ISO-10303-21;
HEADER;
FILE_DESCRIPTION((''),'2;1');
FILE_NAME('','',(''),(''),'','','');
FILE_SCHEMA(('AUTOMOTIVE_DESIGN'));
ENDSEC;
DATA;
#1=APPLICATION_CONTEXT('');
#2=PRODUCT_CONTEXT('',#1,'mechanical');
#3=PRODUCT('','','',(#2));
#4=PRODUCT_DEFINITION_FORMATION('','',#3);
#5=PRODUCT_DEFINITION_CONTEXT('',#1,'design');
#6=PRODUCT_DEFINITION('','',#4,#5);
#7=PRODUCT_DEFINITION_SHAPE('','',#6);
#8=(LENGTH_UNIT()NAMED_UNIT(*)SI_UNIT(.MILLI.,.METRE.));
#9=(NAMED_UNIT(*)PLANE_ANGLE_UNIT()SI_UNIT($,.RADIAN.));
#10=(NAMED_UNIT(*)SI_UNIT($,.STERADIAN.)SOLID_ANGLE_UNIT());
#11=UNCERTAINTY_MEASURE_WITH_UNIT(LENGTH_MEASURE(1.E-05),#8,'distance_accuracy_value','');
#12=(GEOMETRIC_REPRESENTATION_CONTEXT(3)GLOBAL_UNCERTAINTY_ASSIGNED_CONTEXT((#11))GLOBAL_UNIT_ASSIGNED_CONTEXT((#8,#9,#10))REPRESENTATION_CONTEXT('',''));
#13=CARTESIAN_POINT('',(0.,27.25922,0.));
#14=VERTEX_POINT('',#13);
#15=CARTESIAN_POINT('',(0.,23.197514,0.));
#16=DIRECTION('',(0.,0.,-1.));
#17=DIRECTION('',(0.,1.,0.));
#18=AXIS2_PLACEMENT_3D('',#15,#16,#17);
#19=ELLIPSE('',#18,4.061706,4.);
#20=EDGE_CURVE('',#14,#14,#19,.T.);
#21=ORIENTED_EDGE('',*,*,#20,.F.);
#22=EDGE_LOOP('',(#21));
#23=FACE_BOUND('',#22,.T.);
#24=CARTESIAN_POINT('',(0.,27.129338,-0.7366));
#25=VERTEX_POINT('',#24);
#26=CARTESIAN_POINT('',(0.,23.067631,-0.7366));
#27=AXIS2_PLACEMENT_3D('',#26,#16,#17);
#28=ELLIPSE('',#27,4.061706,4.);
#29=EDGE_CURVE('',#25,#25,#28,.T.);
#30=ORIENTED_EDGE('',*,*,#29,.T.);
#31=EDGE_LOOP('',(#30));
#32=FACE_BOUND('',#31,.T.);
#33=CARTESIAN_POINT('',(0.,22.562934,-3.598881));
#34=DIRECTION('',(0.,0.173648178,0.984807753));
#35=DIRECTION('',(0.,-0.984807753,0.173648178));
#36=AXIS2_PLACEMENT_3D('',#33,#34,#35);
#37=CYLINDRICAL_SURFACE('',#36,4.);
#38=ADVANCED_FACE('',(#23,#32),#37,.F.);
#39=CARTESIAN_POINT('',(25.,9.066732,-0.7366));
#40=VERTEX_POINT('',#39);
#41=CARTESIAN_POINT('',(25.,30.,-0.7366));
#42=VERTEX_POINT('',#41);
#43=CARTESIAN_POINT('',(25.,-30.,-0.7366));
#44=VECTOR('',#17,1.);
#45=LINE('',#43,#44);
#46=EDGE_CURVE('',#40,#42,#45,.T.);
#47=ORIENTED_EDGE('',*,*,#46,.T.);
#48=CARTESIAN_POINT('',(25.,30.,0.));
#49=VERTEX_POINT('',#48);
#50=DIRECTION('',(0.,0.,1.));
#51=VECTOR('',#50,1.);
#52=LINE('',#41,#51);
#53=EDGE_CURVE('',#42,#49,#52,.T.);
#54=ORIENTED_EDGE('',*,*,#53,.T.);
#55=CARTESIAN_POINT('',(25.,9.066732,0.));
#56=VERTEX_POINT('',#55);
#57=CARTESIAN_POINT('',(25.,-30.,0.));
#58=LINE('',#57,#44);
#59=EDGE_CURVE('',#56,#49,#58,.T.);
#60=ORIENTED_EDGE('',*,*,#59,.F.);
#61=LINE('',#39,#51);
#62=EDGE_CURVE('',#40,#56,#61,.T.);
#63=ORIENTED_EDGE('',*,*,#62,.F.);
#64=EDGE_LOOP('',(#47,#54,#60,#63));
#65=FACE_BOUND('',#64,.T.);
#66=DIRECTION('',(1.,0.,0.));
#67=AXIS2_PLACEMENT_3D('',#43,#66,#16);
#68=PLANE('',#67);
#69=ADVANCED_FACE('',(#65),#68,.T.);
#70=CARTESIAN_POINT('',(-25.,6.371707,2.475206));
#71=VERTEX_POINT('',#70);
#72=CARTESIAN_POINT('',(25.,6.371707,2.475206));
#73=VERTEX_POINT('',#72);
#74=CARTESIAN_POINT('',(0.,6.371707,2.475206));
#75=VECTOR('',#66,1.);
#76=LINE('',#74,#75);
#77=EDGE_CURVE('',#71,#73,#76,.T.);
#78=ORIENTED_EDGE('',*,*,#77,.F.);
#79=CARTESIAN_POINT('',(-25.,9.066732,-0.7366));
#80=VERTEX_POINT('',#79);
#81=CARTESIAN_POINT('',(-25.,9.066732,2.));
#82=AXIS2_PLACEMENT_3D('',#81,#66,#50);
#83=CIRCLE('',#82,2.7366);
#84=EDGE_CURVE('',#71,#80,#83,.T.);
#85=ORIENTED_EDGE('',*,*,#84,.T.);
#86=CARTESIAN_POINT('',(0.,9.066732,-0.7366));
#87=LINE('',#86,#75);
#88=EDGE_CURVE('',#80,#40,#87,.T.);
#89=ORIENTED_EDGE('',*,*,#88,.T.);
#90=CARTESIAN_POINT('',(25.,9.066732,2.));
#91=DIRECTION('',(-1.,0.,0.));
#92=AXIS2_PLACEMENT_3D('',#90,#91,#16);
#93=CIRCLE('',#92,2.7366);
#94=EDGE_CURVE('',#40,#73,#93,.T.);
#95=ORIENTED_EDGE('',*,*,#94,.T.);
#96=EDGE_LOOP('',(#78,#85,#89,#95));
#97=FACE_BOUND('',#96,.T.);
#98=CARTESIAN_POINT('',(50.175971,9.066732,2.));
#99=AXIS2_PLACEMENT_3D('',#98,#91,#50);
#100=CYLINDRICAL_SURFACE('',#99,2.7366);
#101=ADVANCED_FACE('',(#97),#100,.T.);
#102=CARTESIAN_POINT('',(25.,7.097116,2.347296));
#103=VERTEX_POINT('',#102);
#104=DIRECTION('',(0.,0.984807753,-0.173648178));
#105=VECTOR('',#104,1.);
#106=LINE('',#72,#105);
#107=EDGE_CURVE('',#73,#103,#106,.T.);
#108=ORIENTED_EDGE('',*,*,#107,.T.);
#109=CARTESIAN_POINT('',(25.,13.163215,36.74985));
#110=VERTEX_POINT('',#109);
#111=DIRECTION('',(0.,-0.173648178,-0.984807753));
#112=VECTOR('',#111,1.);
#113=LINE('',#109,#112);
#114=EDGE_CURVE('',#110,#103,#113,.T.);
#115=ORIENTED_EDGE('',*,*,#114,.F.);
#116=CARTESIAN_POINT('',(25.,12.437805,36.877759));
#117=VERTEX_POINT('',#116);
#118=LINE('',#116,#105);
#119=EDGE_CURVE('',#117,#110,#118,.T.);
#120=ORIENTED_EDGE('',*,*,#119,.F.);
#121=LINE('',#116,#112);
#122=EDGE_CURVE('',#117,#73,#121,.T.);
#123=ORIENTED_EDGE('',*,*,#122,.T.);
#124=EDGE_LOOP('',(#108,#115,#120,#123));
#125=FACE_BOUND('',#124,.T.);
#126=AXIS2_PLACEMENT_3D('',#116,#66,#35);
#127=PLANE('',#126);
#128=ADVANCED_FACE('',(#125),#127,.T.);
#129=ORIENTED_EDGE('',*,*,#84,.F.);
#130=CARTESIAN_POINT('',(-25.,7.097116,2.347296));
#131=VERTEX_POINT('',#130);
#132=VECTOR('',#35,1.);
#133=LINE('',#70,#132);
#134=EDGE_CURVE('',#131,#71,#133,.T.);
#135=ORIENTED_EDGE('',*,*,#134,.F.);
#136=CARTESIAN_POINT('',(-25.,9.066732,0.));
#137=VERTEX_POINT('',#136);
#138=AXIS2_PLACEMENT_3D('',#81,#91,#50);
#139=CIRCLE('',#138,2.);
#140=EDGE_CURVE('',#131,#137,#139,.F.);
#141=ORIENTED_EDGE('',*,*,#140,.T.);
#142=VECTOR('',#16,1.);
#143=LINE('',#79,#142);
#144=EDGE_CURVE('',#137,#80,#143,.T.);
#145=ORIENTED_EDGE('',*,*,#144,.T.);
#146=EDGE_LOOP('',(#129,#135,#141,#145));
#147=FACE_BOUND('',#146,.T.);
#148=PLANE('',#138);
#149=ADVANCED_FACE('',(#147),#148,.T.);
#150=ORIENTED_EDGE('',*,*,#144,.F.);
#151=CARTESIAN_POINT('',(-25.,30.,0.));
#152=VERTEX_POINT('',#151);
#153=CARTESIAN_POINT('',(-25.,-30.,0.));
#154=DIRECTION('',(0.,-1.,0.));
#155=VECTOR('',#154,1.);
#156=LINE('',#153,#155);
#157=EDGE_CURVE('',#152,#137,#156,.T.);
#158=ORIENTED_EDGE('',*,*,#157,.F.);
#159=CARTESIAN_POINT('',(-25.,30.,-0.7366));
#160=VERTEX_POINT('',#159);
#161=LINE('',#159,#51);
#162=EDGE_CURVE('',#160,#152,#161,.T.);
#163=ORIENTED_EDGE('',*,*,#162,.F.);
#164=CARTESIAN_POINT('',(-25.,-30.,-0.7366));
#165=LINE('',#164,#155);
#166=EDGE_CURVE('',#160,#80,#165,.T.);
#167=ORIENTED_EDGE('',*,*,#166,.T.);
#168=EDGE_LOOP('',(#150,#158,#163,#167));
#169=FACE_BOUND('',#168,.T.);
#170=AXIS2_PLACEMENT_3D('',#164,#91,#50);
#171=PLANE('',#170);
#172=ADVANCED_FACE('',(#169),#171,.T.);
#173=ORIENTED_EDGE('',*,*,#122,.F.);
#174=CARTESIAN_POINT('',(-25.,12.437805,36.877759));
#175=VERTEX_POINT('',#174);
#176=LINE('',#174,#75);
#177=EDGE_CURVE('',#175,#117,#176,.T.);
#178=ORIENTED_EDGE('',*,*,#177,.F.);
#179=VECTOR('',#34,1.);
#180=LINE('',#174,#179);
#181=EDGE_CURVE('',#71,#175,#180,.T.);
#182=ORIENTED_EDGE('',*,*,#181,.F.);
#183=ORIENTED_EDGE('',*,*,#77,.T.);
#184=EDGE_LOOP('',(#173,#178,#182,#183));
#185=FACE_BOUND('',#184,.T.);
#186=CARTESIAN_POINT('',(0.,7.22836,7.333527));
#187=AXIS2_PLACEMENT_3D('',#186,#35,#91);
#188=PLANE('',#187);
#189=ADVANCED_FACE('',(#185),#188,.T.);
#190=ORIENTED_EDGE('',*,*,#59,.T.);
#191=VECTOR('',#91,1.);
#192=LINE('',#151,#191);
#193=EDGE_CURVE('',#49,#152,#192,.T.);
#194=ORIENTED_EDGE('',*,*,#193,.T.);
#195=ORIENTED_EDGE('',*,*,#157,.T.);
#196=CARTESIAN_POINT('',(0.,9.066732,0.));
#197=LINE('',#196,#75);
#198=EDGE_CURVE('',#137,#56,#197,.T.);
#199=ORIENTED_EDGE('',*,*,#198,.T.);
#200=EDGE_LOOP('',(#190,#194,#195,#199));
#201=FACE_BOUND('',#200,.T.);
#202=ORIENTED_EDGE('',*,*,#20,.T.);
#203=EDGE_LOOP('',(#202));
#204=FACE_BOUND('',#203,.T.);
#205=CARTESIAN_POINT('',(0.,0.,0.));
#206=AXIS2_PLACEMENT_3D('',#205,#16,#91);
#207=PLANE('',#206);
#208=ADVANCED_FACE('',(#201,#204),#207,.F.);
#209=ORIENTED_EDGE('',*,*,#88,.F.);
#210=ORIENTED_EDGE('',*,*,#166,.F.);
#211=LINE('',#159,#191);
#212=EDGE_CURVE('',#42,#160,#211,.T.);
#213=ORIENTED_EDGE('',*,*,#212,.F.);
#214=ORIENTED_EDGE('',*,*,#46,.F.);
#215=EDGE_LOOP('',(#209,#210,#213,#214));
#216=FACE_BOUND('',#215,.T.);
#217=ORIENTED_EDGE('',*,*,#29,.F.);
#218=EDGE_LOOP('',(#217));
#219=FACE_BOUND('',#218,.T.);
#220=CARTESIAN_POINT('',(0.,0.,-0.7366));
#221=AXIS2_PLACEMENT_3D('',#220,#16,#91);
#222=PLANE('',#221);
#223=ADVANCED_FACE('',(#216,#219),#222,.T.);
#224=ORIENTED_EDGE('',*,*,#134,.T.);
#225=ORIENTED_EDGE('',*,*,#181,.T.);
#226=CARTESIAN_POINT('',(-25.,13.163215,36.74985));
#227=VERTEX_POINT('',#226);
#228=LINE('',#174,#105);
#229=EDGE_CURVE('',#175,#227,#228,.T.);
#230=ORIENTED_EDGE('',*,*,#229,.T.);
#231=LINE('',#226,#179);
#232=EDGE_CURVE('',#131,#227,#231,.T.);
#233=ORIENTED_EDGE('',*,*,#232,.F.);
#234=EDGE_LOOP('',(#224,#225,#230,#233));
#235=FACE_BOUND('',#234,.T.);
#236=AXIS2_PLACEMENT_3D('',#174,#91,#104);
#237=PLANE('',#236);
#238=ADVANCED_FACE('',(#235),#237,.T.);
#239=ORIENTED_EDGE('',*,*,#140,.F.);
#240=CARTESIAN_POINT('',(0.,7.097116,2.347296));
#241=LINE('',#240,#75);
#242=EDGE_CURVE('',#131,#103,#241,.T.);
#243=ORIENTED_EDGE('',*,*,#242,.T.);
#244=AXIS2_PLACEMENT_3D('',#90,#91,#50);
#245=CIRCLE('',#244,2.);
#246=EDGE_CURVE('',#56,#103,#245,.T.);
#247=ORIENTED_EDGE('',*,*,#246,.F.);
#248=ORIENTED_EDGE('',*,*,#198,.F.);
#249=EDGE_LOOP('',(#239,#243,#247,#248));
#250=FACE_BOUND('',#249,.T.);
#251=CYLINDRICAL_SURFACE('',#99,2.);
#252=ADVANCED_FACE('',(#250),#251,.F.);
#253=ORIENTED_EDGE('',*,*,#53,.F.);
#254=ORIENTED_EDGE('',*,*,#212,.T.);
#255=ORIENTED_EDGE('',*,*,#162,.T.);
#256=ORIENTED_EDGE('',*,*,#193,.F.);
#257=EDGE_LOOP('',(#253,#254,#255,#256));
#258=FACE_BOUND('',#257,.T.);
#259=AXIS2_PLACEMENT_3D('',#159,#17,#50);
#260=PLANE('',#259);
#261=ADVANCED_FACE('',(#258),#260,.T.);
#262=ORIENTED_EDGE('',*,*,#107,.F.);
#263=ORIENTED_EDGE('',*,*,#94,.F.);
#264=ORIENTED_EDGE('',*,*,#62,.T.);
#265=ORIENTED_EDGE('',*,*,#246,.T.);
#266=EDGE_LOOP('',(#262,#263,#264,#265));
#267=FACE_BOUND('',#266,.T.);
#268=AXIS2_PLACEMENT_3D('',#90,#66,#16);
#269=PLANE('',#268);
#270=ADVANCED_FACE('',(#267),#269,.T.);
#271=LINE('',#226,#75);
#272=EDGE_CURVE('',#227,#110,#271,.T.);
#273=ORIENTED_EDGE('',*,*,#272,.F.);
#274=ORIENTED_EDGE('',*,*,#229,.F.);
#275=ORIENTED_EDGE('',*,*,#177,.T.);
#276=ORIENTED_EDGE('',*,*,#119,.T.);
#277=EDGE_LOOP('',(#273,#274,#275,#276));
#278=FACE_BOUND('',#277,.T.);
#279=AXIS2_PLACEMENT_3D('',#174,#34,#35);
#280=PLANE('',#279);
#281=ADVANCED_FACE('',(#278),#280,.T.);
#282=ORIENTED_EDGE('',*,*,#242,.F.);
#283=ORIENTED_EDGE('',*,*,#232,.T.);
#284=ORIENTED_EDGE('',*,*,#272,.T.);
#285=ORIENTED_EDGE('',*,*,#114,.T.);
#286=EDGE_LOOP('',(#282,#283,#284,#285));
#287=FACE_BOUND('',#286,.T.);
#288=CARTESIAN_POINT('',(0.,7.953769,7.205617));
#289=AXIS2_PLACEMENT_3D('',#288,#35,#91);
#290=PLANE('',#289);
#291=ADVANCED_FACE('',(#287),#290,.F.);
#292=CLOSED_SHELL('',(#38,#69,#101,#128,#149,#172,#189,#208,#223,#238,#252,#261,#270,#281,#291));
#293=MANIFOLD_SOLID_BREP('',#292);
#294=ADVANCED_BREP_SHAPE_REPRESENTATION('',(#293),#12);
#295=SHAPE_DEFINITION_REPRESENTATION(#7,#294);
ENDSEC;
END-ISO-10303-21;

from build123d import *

# Parameters (mm, degrees)
SKETCH1_W               = 50
SKETCH1_H               = 60
BASE_FLANGE1_DEPTH      = 0.7366
SKETCHED_START          = -25
SKETCHED_BEND1_DEPTH    = 50
SKETCHED_BEND1_2_DEPTH  = 50
CUT_EXTRUDE1_DEPTH      = 54.090671485
CUT_EXTRUDE1_DEPTH_BACK = 54.090671485
SKETCH8_R               = 4


# Read off the part's stored shape, not the designer's step: Sketched Bend1
# Sheet-metal steps are written as plain solids
with BuildPart() as part:
    # Sketch1 → Base-Flange1 (new body)
    with BuildSketch(Plane.XY):
        Rectangle(SKETCH1_W, SKETCH1_H)
    extrude(amount=-BASE_FLANGE1_DEPTH)

    # Sketched Bend1 outline → Sketched Bend1 (cut)
    with BuildSketch(Plane.YZ.offset(SKETCHED_START)):
        with BuildLine():
            ThreePointArc((9.066731634, -0.7366), (8.062794494, -0.545798456), (7.198850599, 0))
            Line((7.198850599, 0), (-30, 0))
            Line((-30, 0), (-30, -0.7366))
            Line((-30, -0.7366), (9.066731634, -0.7366))
        make_face()
    extrude(amount=SKETCHED_BEND1_DEPTH, mode=Mode.SUBTRACT)

    # Sketched Bend1 2 outline → Sketched Bend1 2 (add)
    with BuildSketch(Plane.YZ.offset(SKETCHED_START)):
        with BuildLine():
            Line((13.163214519, 36.74984988), (12.437805129, 36.877759128))
            Line((12.437805129, 36.877759128), (6.371706737, 2.475205603))
            ThreePointArc((6.371706737, 2.475205603), (6.471218519, 1.132652762), (7.198850599, 0))
            Line((7.198850599, 0), (9.066731634, 0))
            ThreePointArc((9.066731634, 0), (7.534642748, 0.714424781), (7.097116128, 2.347296355))
            Line((7.097116128, 2.347296355), (13.163214519, 36.74984988))
        make_face()
    extrude(amount=SKETCHED_BEND1_2_DEPTH)

    # Sketch8 → Cut-Extrude1 (cut, two sides: drawn at the far end of the back side and taken through both)
    with BuildSketch(Plane(origin=(0, 0.074278928, 0.849012035), x_dir=(1, 0, 0), z_dir=(0, 0.17364817766693058, 0.984807753012208)).offset(-CUT_EXTRUDE1_DEPTH_BACK)):
        with Locations(Location((0, 22.91937018, 0), (0, 0, 90))):
            Circle(SKETCH8_R)
    extrude(amount=CUT_EXTRUDE1_DEPTH + CUT_EXTRUDE1_DEPTH_BACK, mode=Mode.SUBTRACT)


solid = part.part
